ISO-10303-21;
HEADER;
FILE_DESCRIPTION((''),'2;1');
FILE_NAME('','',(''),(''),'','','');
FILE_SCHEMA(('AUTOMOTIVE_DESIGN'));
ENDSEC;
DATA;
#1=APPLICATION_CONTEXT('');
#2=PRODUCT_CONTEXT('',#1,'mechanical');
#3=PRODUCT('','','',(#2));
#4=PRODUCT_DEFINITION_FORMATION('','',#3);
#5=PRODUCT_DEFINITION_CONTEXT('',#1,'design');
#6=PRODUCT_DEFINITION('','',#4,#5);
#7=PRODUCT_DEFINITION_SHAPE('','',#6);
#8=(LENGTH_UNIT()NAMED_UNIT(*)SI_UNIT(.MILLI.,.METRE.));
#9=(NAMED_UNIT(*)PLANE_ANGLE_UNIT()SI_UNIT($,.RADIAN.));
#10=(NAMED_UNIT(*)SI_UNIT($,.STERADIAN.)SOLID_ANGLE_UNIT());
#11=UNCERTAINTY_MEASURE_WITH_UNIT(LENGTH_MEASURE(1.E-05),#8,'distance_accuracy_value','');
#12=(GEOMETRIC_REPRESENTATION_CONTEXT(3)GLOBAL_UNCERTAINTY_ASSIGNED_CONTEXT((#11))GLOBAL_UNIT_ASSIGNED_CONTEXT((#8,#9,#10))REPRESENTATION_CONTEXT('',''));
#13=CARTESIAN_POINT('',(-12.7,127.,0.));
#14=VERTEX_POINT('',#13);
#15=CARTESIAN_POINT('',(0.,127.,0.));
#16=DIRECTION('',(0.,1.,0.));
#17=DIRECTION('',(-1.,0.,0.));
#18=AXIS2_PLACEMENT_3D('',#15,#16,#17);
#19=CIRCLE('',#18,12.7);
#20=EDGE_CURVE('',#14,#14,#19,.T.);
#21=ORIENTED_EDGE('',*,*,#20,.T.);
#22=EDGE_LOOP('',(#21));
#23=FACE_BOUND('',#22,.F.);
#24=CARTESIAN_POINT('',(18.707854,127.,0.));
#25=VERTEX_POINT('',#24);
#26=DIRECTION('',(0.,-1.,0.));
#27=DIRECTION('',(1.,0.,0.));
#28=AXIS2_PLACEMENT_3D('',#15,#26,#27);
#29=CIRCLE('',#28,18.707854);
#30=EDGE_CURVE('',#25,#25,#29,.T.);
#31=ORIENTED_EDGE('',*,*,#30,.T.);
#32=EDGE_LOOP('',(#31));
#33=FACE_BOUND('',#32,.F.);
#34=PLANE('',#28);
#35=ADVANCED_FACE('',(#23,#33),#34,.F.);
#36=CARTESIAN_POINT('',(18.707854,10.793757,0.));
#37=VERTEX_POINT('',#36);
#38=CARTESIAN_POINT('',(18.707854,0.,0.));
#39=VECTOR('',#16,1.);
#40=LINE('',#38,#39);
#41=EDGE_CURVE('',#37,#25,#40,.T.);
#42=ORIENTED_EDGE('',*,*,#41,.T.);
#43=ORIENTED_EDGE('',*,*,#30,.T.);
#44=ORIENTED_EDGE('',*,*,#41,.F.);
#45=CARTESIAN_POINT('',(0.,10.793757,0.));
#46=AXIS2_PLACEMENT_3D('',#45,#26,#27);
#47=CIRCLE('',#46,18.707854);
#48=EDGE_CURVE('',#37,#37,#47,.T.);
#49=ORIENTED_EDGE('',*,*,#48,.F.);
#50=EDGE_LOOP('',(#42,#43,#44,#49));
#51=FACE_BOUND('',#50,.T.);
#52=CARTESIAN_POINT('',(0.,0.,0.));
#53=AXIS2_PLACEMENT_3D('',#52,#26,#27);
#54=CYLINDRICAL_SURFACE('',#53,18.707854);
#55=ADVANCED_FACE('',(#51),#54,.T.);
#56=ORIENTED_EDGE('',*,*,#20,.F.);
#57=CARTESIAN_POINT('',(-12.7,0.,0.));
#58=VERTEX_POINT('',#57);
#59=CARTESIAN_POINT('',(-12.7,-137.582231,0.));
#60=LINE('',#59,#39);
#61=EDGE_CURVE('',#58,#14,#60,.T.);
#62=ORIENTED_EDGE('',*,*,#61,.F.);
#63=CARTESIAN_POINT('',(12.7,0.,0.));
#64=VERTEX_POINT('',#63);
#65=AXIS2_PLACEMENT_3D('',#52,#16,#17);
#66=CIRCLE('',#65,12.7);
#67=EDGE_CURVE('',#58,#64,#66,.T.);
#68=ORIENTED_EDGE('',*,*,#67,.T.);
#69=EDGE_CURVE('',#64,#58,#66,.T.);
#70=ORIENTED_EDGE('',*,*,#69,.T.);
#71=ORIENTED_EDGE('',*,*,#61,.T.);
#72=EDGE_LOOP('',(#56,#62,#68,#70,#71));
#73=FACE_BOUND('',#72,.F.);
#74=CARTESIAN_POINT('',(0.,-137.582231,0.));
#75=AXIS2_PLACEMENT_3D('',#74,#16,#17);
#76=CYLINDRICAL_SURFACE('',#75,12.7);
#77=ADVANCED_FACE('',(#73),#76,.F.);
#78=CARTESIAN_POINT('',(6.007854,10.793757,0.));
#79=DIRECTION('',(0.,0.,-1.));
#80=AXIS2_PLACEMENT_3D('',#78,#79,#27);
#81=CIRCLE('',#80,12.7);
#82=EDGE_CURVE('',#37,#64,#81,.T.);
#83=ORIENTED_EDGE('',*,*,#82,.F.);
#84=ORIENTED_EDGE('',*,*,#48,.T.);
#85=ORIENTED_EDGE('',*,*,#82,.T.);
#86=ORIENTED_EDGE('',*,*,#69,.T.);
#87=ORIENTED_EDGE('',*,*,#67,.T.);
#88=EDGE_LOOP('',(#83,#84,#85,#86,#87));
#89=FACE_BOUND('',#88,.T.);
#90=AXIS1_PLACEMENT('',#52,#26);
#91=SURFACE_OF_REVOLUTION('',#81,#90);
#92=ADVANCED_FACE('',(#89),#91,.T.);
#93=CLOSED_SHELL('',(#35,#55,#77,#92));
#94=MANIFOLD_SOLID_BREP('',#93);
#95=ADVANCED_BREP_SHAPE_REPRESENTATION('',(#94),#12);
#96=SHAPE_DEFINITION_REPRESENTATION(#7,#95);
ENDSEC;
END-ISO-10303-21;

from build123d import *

# Parameters (mm, degrees)
F0_R     = 18.707853832
F1_DEPTH = 127
F3_D     = 25.4


# Not quite as in the source:
# - a fillet or chamfer that OpenCascade refuses, or shapes differently, is made with other operations: its cross-section is extruded or revolved along the edge and cut away or added


with BuildPart() as f1:
    # F0 (on Front) → F1 (new body)
    with BuildSketch(Plane.XZ):
        Circle(F0_R)
    extrude(amount=-F1_DEPTH)

    # F3 (through all)
    with Locations(Plane.XZ):
        with Locations((0, 0)):
            Hole(F3_D / 2)

    # F4: fillet of radius 12.7 on 1 edges, made by hand

    # F4_s1 → F4_t2 (revolve, cut)
    with BuildSketch(Plane.XY):
        with BuildLine():
            ThreePointArc((18.707853832, 10.7937565132), (17.1047060058, 4.6171982618), (12.7, 0))
            Line((12.7, 0), (18.707853832, 0))
            Line((18.707853832, 0), (18.707853832, 10.7937565132))
        make_face()
    revolve(axis=Axis((0, 0, 0), (0, -1, 0)), mode=Mode.SUBTRACT)


solid = f1.part
